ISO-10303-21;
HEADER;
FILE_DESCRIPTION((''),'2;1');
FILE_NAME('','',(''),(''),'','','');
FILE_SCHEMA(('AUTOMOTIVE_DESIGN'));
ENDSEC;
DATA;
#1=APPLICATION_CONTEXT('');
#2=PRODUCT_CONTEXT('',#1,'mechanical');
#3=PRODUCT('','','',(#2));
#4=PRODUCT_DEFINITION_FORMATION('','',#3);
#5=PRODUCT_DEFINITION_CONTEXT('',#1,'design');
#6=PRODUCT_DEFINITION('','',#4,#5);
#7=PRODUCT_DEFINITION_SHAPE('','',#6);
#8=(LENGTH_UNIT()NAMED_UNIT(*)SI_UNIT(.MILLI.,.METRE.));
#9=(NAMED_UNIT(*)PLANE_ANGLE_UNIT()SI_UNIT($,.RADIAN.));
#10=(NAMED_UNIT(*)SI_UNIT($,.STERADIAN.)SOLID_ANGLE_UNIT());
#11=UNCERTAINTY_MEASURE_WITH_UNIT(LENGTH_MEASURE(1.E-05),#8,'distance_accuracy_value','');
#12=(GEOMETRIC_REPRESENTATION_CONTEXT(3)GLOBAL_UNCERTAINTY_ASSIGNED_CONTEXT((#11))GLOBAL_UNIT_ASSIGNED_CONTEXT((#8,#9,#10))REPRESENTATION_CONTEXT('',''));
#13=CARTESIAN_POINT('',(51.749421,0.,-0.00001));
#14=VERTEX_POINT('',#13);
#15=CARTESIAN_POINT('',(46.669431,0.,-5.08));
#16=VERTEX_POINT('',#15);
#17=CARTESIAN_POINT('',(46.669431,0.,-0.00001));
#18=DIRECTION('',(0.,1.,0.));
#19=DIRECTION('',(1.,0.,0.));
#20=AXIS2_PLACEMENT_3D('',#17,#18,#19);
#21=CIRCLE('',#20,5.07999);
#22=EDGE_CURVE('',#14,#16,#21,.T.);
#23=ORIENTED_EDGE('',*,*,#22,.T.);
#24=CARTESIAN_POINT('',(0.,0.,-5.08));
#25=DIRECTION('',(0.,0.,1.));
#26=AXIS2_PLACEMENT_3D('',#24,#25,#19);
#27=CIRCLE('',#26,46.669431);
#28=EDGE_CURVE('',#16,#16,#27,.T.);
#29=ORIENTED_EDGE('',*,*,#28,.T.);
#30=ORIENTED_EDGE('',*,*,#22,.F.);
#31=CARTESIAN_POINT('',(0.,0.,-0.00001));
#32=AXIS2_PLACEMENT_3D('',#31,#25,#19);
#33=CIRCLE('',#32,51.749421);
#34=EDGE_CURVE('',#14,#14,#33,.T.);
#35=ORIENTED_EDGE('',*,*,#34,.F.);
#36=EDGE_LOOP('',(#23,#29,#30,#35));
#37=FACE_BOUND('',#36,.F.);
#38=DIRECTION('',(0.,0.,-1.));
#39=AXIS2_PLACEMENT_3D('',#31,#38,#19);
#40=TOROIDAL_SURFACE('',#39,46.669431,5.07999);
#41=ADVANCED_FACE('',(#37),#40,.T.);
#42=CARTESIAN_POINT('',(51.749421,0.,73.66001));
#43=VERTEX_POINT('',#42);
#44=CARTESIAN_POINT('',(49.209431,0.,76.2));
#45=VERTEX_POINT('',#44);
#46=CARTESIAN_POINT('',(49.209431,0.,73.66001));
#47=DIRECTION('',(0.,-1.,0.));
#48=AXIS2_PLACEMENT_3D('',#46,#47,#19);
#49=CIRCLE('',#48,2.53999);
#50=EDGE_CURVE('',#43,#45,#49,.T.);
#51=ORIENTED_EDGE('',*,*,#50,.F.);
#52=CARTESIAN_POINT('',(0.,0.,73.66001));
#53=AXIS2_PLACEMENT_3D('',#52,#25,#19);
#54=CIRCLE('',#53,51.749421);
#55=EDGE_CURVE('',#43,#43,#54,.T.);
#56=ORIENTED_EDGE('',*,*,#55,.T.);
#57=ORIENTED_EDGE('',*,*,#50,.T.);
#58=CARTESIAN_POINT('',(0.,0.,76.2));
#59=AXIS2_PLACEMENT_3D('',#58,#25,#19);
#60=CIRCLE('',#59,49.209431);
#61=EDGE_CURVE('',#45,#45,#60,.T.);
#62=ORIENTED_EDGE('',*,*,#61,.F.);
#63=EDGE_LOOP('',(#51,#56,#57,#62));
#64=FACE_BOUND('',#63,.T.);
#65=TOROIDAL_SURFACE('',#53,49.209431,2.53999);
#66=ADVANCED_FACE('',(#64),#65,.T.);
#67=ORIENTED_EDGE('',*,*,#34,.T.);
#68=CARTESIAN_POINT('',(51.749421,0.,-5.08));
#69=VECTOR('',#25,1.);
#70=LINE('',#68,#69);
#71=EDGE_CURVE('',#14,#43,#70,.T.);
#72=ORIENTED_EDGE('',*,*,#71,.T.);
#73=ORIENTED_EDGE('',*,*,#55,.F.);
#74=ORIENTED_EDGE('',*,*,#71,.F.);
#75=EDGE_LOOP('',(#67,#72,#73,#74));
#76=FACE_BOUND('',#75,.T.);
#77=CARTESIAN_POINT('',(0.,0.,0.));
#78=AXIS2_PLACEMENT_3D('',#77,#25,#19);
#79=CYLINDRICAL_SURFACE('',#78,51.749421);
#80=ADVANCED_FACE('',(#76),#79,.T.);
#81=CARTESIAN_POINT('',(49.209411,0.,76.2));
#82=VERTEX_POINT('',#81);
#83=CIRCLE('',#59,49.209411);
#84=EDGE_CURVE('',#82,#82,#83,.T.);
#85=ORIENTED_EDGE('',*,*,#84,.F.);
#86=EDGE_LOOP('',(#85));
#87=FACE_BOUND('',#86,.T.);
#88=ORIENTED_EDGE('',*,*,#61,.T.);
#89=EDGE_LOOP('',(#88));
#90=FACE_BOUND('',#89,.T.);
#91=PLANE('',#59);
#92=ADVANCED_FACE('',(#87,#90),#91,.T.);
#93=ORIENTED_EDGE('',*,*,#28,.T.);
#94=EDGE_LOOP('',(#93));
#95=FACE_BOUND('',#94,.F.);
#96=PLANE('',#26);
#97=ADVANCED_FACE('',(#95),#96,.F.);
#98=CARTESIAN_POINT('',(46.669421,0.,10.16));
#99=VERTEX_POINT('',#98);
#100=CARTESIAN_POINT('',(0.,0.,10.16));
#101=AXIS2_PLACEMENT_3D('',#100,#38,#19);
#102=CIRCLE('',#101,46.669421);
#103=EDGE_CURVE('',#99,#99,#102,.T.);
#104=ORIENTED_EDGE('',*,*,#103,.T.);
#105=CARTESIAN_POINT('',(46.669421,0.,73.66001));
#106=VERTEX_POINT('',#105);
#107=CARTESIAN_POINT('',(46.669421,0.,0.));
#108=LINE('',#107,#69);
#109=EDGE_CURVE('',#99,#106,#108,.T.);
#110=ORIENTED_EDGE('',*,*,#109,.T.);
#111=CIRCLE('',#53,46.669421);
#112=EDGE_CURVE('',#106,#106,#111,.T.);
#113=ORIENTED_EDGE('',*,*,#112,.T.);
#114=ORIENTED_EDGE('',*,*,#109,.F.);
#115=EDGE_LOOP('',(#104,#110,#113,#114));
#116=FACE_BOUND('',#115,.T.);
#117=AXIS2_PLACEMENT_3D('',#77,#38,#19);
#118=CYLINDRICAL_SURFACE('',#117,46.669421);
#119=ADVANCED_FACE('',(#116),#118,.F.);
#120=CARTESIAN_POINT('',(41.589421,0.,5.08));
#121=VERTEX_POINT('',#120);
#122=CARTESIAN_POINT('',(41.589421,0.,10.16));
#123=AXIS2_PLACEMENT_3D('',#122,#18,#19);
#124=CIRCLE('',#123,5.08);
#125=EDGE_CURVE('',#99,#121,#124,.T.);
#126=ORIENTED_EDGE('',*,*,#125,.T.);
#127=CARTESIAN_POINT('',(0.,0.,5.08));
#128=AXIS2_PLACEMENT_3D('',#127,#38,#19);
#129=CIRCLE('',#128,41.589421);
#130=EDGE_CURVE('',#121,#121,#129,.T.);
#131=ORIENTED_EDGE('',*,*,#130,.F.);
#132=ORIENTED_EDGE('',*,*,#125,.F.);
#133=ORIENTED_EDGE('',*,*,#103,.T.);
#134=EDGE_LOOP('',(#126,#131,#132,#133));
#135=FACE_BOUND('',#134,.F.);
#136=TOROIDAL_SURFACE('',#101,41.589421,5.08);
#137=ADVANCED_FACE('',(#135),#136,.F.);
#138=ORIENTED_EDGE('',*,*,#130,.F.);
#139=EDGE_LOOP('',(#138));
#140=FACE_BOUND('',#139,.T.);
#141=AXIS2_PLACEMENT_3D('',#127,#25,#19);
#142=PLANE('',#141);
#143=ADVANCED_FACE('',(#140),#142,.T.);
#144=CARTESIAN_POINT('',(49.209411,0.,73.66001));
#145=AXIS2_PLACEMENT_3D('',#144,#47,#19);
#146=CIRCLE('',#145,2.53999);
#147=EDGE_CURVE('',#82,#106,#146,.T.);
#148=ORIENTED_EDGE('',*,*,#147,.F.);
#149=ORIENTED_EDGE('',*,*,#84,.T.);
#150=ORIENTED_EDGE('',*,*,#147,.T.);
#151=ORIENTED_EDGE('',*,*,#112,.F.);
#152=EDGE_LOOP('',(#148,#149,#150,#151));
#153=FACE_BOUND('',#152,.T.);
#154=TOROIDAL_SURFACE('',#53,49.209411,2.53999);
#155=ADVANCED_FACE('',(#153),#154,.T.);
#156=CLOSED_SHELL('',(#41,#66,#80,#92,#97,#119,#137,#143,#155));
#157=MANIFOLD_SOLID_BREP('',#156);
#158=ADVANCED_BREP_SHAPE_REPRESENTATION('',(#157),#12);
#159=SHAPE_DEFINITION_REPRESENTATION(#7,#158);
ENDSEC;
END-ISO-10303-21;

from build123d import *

# Parameters (mm, degrees)
F0_R      = 51.7494214311
F1_DEPTH  = 76.2
F2_T      = -5.08
F1_FACE_R = 51.7494214311
F3_DEPTH  = 5.08
F4_R      = 2.53999
F5_R      = 5.08
F6_R      = 5.07999


# Not quite as in the source:
# - a fillet or chamfer is up to 0.001 mm smaller than in the source, because OpenCascade refuses the exact size


with BuildPart() as f1:
    # F0 (on Top) → F1 (new body)
    with BuildSketch(Plane.XY):
        Circle(F0_R)
    extrude(amount=F1_DEPTH)

    # F2
    f2_openings = [f1.faces().sort_by_distance(p)[0] for p in [
        (0, 0, 76.2),
    ]]
    offset(amount=F2_T, openings=f2_openings)

    # F0 (on Top) + F1_face (on face) → F3 (join)
    with BuildSketch(Plane.XY):
        Circle(F0_R)
    with BuildSketch(Plane(origin=(0, 0, 0), x_dir=(1, 0, 0), z_dir=(0, 0, -1))):
        Circle(F1_FACE_R)
    extrude(amount=-F3_DEPTH, dir=(0, 0, 1))

    # F4 (radius 2.54 in the source; OpenCascade refuses exactly that, so slightly less here)
    f4_edges = [f1.edges().sort_by_distance(p)[0] for p in [
        (-51.749421, 0, 76.2),
        (-46.669421, 0, 76.2),
    ]]
    fillet(f4_edges, radius=F4_R)

    # F5
    f5_edges = [f1.edges().sort_by_distance(p)[0] for p in [
        (-46.669421, 0, 5.08),
    ]]
    fillet(f5_edges, radius=F5_R)

    # F6 (radius 5.08 in the source; OpenCascade refuses exactly that, so slightly less here)
    f6_edges = [f1.edges().sort_by_distance(p)[0] for p in [
        (-51.749421, 0, -5.08),
    ]]
    fillet(f6_edges, radius=F6_R)


solid = f1.part
